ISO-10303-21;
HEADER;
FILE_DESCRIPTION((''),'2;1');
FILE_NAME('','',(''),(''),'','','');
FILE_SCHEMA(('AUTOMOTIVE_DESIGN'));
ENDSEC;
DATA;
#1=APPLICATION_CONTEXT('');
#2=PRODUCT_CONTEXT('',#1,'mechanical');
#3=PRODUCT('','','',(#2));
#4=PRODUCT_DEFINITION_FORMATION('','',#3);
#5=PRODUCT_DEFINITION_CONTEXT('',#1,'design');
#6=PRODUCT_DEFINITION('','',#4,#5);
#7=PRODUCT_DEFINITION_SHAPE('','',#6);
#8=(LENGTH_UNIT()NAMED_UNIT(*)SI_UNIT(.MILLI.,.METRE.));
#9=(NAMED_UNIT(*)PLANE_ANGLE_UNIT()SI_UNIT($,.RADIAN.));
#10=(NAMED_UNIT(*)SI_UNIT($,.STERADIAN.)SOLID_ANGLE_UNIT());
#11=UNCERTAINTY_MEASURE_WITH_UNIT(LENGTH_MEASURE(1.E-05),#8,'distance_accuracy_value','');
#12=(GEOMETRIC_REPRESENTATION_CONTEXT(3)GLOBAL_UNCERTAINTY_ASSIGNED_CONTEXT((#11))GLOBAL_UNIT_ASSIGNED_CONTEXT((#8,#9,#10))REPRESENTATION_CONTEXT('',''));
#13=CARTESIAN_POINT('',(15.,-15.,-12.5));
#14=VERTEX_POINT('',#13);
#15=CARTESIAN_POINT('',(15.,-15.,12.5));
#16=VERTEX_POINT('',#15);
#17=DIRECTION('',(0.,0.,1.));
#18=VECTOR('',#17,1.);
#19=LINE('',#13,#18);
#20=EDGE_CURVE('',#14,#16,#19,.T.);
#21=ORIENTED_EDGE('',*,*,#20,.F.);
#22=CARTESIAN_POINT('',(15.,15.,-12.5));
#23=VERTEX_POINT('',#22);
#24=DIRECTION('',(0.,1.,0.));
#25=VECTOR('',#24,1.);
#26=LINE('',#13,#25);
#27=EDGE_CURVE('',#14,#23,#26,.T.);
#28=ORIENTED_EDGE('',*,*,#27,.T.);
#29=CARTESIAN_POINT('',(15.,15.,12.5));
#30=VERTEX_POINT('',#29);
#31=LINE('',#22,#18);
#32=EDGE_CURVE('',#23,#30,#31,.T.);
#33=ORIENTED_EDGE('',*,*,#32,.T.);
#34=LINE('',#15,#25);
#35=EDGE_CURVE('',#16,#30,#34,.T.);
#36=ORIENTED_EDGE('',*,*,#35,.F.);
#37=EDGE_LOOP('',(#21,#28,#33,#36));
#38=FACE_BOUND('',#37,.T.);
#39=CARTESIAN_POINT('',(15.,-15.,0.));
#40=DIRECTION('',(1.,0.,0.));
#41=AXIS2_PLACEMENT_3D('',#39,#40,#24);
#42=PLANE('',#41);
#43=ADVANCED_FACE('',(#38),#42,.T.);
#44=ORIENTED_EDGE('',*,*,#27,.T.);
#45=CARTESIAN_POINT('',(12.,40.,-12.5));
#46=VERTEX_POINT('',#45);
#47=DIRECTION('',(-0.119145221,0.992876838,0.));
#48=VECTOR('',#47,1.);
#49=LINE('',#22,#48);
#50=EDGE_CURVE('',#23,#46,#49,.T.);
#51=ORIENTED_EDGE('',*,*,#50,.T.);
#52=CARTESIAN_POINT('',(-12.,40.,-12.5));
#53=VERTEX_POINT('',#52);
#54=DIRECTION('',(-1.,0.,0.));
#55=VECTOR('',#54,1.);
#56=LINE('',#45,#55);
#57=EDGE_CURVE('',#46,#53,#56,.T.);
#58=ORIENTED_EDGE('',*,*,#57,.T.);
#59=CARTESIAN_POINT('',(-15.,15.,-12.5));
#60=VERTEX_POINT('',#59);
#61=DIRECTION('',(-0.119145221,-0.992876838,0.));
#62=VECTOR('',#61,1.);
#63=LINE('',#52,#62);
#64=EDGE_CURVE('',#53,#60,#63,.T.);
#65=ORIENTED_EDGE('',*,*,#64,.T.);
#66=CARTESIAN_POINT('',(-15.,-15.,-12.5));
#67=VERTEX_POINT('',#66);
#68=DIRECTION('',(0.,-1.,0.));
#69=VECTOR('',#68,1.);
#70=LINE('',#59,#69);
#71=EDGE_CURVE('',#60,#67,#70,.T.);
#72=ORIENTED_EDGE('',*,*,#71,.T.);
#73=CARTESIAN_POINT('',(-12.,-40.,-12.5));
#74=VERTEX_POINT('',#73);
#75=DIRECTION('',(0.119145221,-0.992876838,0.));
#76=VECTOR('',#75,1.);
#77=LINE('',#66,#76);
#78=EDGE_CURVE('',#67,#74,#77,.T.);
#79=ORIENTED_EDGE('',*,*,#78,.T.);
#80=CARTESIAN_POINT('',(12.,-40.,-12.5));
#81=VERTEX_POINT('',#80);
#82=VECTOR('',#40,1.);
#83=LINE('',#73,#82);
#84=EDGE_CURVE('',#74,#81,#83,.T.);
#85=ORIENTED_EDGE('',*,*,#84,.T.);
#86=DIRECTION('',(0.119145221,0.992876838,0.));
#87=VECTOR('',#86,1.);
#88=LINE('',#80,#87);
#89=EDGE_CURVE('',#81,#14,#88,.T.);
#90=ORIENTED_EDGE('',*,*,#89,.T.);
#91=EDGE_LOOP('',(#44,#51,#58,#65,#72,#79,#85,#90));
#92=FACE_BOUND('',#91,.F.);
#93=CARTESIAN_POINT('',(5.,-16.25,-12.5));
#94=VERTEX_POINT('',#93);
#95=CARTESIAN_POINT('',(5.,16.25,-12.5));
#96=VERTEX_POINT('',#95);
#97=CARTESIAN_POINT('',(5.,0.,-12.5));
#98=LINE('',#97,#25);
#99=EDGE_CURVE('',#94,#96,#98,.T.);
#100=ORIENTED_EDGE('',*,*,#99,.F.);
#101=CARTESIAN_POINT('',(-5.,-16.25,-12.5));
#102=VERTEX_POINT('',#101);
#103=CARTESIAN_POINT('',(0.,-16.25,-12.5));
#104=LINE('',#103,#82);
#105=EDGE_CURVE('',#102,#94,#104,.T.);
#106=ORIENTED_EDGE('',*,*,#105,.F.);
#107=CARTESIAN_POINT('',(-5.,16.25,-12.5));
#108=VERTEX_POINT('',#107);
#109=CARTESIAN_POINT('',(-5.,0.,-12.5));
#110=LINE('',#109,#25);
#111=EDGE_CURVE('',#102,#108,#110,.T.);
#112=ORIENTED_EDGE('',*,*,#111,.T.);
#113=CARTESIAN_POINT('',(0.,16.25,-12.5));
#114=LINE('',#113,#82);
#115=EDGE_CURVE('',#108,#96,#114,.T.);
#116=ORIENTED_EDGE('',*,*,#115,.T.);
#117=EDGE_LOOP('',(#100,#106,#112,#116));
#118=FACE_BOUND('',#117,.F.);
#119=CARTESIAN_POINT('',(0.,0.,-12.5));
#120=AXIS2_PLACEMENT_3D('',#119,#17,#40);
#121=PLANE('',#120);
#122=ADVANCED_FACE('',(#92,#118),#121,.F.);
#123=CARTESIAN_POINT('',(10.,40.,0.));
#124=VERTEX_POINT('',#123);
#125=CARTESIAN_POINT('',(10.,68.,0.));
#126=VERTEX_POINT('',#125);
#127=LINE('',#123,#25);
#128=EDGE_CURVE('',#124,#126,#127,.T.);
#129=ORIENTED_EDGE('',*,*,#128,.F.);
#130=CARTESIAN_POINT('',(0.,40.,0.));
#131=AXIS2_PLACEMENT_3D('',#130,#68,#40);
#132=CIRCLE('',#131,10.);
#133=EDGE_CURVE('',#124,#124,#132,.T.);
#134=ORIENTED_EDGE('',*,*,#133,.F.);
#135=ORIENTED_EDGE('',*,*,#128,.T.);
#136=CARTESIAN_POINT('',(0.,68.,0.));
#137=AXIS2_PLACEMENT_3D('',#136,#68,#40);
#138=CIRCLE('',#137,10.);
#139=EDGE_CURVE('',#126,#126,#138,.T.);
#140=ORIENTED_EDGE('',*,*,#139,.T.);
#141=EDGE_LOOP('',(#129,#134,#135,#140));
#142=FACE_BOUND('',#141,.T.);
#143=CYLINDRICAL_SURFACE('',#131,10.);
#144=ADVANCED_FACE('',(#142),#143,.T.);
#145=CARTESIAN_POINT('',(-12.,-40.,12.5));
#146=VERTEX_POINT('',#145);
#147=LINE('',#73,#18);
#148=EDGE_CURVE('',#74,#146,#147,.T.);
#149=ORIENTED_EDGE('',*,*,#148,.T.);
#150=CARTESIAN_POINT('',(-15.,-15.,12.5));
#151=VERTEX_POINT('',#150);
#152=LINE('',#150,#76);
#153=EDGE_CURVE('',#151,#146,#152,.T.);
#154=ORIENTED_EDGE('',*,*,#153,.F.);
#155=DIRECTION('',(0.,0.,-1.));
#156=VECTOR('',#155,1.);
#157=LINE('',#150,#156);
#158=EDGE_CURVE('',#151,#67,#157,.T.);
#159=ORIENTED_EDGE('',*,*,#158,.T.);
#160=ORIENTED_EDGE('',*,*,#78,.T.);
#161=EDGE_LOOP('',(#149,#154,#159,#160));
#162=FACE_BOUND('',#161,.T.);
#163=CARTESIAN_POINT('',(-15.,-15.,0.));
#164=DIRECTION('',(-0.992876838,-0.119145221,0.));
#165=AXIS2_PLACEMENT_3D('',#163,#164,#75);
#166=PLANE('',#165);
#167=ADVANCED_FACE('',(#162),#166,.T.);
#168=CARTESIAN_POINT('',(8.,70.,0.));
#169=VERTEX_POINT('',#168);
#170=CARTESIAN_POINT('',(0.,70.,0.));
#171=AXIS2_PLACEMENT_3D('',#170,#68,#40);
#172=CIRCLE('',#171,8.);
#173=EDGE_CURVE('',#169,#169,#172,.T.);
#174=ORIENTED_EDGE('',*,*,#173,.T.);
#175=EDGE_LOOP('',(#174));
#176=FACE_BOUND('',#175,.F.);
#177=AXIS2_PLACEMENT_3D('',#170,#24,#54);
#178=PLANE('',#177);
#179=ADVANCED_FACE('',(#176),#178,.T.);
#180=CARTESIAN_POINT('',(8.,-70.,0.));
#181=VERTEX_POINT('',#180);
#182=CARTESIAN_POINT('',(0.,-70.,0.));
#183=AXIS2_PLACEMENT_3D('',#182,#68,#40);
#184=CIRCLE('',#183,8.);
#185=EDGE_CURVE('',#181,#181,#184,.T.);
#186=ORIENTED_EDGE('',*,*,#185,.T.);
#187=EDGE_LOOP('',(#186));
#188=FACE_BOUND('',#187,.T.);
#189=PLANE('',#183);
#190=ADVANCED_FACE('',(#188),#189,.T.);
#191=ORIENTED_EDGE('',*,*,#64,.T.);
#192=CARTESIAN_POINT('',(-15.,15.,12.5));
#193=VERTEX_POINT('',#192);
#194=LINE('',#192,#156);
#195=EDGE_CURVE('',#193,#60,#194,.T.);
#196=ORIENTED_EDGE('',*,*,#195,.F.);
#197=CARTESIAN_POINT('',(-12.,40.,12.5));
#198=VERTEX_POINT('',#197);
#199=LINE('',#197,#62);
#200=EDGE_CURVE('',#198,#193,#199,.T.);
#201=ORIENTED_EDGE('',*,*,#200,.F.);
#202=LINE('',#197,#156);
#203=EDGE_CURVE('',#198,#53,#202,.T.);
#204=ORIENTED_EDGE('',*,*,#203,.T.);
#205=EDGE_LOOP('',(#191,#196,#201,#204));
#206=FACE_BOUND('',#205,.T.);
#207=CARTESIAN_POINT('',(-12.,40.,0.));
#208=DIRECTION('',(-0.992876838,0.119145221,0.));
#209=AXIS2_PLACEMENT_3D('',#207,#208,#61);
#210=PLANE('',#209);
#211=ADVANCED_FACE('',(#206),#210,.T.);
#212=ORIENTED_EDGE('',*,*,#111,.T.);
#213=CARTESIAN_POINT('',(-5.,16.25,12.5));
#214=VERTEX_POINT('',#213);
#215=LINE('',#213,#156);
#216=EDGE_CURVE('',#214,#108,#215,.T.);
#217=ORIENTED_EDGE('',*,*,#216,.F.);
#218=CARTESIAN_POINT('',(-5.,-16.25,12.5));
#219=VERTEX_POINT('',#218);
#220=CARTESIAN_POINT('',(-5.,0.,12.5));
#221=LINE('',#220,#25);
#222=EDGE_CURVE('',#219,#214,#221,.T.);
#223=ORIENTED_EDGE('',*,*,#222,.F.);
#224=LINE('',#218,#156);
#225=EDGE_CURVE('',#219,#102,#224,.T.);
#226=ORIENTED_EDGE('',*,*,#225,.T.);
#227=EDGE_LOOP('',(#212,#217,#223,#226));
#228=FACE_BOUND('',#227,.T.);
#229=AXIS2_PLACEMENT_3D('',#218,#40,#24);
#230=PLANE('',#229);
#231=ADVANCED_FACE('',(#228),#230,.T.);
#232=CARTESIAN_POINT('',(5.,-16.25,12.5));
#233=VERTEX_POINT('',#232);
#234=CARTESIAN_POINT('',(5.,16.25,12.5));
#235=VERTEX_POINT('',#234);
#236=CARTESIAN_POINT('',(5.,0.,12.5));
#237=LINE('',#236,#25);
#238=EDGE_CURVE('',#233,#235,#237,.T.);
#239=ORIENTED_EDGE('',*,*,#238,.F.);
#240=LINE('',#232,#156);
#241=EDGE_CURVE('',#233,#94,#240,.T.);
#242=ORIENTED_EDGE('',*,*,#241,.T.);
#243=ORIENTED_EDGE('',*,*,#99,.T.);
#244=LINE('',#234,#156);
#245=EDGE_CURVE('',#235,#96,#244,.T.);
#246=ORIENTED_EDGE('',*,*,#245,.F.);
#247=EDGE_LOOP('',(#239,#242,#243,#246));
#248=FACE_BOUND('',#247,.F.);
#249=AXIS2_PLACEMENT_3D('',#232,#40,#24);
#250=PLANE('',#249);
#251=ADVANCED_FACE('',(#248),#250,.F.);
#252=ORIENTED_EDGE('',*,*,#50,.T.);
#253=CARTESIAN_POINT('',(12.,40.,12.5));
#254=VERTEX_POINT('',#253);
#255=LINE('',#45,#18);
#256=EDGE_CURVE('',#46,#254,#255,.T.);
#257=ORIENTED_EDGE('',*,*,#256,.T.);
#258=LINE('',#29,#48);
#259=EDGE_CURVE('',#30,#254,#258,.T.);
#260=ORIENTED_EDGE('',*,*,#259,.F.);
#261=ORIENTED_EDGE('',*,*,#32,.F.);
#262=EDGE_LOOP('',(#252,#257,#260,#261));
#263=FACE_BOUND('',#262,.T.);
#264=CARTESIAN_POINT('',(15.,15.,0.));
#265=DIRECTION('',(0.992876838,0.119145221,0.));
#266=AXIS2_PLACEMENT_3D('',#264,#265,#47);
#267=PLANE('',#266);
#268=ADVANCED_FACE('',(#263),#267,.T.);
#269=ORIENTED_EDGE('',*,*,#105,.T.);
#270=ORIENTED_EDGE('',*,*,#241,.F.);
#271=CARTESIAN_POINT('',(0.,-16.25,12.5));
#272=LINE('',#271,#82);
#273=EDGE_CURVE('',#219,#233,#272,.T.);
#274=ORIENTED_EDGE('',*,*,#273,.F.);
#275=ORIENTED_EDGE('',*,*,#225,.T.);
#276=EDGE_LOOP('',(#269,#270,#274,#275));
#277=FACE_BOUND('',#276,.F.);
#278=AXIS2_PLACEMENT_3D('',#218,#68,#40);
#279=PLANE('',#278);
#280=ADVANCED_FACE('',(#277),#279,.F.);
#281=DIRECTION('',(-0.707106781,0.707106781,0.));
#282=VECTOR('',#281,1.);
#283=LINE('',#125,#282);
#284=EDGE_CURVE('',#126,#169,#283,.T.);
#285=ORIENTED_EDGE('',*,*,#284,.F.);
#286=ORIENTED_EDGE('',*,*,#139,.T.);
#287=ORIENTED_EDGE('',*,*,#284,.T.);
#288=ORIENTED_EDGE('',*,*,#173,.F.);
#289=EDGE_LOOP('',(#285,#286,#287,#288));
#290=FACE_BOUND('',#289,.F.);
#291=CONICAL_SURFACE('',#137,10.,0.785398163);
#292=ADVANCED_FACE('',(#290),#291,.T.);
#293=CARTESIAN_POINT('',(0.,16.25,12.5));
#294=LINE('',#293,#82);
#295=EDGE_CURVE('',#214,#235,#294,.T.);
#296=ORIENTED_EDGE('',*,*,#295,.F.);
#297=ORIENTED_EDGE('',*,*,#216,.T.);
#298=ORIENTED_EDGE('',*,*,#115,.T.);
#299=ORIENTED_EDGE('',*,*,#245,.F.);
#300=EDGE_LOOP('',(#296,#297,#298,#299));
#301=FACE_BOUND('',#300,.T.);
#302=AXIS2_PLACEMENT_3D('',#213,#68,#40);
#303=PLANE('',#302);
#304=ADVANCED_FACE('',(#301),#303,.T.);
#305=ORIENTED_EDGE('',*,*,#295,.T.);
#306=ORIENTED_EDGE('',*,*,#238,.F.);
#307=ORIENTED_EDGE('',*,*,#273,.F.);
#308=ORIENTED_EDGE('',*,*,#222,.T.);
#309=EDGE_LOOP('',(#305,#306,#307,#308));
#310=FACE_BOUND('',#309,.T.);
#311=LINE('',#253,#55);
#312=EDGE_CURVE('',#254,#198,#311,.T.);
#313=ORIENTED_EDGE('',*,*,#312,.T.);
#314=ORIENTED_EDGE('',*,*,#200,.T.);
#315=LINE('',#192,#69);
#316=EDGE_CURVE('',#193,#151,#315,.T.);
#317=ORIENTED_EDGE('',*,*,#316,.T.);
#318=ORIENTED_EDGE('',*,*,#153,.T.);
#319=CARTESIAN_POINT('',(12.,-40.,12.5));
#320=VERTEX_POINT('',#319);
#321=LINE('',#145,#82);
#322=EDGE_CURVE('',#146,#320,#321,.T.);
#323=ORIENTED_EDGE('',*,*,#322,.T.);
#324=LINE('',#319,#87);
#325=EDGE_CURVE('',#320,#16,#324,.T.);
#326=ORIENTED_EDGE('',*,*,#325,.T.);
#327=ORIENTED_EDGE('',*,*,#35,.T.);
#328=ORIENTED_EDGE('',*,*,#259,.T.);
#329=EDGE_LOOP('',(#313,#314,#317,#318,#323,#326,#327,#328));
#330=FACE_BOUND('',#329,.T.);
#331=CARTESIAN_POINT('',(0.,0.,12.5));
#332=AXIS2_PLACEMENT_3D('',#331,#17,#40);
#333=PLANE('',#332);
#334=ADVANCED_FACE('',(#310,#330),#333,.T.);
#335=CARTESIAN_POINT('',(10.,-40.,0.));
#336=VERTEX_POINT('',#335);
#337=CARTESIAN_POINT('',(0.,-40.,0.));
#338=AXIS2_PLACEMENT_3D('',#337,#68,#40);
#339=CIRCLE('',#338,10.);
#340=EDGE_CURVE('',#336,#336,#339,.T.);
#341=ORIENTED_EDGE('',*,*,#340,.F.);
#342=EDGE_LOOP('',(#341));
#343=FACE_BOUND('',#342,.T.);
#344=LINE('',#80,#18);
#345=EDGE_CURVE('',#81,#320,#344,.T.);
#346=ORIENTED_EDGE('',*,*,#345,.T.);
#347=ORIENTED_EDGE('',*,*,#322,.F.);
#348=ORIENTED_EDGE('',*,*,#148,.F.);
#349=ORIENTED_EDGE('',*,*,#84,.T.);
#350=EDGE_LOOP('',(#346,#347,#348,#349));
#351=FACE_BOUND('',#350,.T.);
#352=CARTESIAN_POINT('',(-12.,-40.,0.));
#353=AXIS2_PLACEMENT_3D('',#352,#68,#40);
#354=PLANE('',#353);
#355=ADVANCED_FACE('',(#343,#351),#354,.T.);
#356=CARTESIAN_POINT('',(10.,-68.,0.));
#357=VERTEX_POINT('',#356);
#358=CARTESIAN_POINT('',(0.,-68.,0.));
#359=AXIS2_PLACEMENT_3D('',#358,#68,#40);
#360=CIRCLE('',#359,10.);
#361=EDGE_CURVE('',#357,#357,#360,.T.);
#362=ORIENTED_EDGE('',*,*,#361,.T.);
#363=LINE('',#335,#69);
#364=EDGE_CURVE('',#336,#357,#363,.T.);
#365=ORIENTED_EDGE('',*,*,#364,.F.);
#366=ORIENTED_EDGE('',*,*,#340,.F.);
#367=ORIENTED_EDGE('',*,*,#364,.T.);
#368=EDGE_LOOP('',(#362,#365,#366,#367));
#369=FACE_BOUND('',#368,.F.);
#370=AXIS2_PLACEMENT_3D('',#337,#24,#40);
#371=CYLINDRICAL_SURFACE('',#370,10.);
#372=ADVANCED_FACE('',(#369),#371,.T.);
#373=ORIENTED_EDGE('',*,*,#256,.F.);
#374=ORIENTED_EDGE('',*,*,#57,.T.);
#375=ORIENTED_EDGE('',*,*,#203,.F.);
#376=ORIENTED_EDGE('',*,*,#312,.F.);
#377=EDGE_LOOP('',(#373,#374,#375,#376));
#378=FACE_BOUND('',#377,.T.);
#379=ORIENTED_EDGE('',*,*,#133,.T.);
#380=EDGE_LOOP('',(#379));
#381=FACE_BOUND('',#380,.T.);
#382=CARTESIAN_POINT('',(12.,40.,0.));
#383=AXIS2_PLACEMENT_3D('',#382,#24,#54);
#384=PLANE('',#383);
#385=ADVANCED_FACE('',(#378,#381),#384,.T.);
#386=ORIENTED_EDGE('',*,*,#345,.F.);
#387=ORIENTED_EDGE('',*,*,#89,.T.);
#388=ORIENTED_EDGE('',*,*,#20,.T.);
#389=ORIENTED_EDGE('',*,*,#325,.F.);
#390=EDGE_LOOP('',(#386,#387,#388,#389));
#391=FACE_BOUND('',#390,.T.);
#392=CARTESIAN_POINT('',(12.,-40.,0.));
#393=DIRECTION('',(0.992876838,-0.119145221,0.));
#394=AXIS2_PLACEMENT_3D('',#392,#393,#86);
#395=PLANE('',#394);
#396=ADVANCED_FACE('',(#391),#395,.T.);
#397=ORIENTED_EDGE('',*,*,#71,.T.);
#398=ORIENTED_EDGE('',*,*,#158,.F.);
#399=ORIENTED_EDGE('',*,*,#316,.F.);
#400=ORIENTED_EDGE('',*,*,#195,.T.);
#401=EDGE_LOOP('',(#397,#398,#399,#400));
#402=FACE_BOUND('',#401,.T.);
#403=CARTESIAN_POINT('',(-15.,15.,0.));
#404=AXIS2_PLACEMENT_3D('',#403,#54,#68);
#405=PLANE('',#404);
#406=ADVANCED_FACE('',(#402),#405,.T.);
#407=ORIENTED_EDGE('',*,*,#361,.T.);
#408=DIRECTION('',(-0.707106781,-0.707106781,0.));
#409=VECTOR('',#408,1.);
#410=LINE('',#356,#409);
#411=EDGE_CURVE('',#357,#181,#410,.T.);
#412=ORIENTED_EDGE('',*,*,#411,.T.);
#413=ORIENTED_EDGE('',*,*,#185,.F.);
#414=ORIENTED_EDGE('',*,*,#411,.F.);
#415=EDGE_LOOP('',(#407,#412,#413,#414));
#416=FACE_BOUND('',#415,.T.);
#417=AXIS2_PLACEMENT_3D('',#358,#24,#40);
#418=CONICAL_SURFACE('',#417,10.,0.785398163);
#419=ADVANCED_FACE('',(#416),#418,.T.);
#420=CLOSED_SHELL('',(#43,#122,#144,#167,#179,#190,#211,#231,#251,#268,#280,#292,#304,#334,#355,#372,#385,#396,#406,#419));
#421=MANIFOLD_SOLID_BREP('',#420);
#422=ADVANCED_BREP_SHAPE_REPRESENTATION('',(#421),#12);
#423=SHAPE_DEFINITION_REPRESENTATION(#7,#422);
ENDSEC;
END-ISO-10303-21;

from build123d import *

# Parameters (mm, degrees)
F1_DEPTH = 12.5
F2_R     = 10
F3_DEPTH = 30
F4_SIZE  = 2
F5_W     = 10
F5_H     = 32.5
F6_DEPTH = 25


# Not quite as in the source:
# - a pattern or mirror of a feature is missing from the dataset's text; its kind, count and spacing are read off the source's solid


with BuildPart() as f1:
    # F0 (on Top) → F1 (new body, symmetric)
    with BuildSketch(Plane.XY):
        Polygon((-15, -15), (-12, -40), (12, -40), (15, -15), (15, 15), (12, 40), (-12, 40), (-15, 15), align=None)
    extrude(amount=F1_DEPTH, both=True)

    # F2 (on face) → F3 (join)
    with BuildSketch(Plane.XZ.offset(40)):
        Circle(F2_R)
    f3 = extrude(amount=F3_DEPTH)

    # F3_copies: F3 across plane
    add(f3.mirror(Plane.ZX))

    # F4
    f4_edges = [f1.edges().sort_by_distance(p)[0] for p in [
        (-10, -70, 0),
        (-10, 70, 0),
    ]]
    chamfer(f4_edges, length=F4_SIZE)

    # F5 (on face) → F6 (cut)
    with BuildSketch(Plane.XY.offset(12.5)):
        Rectangle(F5_W, F5_H)
    extrude(amount=-F6_DEPTH, mode=Mode.SUBTRACT)


solid = f1.part
